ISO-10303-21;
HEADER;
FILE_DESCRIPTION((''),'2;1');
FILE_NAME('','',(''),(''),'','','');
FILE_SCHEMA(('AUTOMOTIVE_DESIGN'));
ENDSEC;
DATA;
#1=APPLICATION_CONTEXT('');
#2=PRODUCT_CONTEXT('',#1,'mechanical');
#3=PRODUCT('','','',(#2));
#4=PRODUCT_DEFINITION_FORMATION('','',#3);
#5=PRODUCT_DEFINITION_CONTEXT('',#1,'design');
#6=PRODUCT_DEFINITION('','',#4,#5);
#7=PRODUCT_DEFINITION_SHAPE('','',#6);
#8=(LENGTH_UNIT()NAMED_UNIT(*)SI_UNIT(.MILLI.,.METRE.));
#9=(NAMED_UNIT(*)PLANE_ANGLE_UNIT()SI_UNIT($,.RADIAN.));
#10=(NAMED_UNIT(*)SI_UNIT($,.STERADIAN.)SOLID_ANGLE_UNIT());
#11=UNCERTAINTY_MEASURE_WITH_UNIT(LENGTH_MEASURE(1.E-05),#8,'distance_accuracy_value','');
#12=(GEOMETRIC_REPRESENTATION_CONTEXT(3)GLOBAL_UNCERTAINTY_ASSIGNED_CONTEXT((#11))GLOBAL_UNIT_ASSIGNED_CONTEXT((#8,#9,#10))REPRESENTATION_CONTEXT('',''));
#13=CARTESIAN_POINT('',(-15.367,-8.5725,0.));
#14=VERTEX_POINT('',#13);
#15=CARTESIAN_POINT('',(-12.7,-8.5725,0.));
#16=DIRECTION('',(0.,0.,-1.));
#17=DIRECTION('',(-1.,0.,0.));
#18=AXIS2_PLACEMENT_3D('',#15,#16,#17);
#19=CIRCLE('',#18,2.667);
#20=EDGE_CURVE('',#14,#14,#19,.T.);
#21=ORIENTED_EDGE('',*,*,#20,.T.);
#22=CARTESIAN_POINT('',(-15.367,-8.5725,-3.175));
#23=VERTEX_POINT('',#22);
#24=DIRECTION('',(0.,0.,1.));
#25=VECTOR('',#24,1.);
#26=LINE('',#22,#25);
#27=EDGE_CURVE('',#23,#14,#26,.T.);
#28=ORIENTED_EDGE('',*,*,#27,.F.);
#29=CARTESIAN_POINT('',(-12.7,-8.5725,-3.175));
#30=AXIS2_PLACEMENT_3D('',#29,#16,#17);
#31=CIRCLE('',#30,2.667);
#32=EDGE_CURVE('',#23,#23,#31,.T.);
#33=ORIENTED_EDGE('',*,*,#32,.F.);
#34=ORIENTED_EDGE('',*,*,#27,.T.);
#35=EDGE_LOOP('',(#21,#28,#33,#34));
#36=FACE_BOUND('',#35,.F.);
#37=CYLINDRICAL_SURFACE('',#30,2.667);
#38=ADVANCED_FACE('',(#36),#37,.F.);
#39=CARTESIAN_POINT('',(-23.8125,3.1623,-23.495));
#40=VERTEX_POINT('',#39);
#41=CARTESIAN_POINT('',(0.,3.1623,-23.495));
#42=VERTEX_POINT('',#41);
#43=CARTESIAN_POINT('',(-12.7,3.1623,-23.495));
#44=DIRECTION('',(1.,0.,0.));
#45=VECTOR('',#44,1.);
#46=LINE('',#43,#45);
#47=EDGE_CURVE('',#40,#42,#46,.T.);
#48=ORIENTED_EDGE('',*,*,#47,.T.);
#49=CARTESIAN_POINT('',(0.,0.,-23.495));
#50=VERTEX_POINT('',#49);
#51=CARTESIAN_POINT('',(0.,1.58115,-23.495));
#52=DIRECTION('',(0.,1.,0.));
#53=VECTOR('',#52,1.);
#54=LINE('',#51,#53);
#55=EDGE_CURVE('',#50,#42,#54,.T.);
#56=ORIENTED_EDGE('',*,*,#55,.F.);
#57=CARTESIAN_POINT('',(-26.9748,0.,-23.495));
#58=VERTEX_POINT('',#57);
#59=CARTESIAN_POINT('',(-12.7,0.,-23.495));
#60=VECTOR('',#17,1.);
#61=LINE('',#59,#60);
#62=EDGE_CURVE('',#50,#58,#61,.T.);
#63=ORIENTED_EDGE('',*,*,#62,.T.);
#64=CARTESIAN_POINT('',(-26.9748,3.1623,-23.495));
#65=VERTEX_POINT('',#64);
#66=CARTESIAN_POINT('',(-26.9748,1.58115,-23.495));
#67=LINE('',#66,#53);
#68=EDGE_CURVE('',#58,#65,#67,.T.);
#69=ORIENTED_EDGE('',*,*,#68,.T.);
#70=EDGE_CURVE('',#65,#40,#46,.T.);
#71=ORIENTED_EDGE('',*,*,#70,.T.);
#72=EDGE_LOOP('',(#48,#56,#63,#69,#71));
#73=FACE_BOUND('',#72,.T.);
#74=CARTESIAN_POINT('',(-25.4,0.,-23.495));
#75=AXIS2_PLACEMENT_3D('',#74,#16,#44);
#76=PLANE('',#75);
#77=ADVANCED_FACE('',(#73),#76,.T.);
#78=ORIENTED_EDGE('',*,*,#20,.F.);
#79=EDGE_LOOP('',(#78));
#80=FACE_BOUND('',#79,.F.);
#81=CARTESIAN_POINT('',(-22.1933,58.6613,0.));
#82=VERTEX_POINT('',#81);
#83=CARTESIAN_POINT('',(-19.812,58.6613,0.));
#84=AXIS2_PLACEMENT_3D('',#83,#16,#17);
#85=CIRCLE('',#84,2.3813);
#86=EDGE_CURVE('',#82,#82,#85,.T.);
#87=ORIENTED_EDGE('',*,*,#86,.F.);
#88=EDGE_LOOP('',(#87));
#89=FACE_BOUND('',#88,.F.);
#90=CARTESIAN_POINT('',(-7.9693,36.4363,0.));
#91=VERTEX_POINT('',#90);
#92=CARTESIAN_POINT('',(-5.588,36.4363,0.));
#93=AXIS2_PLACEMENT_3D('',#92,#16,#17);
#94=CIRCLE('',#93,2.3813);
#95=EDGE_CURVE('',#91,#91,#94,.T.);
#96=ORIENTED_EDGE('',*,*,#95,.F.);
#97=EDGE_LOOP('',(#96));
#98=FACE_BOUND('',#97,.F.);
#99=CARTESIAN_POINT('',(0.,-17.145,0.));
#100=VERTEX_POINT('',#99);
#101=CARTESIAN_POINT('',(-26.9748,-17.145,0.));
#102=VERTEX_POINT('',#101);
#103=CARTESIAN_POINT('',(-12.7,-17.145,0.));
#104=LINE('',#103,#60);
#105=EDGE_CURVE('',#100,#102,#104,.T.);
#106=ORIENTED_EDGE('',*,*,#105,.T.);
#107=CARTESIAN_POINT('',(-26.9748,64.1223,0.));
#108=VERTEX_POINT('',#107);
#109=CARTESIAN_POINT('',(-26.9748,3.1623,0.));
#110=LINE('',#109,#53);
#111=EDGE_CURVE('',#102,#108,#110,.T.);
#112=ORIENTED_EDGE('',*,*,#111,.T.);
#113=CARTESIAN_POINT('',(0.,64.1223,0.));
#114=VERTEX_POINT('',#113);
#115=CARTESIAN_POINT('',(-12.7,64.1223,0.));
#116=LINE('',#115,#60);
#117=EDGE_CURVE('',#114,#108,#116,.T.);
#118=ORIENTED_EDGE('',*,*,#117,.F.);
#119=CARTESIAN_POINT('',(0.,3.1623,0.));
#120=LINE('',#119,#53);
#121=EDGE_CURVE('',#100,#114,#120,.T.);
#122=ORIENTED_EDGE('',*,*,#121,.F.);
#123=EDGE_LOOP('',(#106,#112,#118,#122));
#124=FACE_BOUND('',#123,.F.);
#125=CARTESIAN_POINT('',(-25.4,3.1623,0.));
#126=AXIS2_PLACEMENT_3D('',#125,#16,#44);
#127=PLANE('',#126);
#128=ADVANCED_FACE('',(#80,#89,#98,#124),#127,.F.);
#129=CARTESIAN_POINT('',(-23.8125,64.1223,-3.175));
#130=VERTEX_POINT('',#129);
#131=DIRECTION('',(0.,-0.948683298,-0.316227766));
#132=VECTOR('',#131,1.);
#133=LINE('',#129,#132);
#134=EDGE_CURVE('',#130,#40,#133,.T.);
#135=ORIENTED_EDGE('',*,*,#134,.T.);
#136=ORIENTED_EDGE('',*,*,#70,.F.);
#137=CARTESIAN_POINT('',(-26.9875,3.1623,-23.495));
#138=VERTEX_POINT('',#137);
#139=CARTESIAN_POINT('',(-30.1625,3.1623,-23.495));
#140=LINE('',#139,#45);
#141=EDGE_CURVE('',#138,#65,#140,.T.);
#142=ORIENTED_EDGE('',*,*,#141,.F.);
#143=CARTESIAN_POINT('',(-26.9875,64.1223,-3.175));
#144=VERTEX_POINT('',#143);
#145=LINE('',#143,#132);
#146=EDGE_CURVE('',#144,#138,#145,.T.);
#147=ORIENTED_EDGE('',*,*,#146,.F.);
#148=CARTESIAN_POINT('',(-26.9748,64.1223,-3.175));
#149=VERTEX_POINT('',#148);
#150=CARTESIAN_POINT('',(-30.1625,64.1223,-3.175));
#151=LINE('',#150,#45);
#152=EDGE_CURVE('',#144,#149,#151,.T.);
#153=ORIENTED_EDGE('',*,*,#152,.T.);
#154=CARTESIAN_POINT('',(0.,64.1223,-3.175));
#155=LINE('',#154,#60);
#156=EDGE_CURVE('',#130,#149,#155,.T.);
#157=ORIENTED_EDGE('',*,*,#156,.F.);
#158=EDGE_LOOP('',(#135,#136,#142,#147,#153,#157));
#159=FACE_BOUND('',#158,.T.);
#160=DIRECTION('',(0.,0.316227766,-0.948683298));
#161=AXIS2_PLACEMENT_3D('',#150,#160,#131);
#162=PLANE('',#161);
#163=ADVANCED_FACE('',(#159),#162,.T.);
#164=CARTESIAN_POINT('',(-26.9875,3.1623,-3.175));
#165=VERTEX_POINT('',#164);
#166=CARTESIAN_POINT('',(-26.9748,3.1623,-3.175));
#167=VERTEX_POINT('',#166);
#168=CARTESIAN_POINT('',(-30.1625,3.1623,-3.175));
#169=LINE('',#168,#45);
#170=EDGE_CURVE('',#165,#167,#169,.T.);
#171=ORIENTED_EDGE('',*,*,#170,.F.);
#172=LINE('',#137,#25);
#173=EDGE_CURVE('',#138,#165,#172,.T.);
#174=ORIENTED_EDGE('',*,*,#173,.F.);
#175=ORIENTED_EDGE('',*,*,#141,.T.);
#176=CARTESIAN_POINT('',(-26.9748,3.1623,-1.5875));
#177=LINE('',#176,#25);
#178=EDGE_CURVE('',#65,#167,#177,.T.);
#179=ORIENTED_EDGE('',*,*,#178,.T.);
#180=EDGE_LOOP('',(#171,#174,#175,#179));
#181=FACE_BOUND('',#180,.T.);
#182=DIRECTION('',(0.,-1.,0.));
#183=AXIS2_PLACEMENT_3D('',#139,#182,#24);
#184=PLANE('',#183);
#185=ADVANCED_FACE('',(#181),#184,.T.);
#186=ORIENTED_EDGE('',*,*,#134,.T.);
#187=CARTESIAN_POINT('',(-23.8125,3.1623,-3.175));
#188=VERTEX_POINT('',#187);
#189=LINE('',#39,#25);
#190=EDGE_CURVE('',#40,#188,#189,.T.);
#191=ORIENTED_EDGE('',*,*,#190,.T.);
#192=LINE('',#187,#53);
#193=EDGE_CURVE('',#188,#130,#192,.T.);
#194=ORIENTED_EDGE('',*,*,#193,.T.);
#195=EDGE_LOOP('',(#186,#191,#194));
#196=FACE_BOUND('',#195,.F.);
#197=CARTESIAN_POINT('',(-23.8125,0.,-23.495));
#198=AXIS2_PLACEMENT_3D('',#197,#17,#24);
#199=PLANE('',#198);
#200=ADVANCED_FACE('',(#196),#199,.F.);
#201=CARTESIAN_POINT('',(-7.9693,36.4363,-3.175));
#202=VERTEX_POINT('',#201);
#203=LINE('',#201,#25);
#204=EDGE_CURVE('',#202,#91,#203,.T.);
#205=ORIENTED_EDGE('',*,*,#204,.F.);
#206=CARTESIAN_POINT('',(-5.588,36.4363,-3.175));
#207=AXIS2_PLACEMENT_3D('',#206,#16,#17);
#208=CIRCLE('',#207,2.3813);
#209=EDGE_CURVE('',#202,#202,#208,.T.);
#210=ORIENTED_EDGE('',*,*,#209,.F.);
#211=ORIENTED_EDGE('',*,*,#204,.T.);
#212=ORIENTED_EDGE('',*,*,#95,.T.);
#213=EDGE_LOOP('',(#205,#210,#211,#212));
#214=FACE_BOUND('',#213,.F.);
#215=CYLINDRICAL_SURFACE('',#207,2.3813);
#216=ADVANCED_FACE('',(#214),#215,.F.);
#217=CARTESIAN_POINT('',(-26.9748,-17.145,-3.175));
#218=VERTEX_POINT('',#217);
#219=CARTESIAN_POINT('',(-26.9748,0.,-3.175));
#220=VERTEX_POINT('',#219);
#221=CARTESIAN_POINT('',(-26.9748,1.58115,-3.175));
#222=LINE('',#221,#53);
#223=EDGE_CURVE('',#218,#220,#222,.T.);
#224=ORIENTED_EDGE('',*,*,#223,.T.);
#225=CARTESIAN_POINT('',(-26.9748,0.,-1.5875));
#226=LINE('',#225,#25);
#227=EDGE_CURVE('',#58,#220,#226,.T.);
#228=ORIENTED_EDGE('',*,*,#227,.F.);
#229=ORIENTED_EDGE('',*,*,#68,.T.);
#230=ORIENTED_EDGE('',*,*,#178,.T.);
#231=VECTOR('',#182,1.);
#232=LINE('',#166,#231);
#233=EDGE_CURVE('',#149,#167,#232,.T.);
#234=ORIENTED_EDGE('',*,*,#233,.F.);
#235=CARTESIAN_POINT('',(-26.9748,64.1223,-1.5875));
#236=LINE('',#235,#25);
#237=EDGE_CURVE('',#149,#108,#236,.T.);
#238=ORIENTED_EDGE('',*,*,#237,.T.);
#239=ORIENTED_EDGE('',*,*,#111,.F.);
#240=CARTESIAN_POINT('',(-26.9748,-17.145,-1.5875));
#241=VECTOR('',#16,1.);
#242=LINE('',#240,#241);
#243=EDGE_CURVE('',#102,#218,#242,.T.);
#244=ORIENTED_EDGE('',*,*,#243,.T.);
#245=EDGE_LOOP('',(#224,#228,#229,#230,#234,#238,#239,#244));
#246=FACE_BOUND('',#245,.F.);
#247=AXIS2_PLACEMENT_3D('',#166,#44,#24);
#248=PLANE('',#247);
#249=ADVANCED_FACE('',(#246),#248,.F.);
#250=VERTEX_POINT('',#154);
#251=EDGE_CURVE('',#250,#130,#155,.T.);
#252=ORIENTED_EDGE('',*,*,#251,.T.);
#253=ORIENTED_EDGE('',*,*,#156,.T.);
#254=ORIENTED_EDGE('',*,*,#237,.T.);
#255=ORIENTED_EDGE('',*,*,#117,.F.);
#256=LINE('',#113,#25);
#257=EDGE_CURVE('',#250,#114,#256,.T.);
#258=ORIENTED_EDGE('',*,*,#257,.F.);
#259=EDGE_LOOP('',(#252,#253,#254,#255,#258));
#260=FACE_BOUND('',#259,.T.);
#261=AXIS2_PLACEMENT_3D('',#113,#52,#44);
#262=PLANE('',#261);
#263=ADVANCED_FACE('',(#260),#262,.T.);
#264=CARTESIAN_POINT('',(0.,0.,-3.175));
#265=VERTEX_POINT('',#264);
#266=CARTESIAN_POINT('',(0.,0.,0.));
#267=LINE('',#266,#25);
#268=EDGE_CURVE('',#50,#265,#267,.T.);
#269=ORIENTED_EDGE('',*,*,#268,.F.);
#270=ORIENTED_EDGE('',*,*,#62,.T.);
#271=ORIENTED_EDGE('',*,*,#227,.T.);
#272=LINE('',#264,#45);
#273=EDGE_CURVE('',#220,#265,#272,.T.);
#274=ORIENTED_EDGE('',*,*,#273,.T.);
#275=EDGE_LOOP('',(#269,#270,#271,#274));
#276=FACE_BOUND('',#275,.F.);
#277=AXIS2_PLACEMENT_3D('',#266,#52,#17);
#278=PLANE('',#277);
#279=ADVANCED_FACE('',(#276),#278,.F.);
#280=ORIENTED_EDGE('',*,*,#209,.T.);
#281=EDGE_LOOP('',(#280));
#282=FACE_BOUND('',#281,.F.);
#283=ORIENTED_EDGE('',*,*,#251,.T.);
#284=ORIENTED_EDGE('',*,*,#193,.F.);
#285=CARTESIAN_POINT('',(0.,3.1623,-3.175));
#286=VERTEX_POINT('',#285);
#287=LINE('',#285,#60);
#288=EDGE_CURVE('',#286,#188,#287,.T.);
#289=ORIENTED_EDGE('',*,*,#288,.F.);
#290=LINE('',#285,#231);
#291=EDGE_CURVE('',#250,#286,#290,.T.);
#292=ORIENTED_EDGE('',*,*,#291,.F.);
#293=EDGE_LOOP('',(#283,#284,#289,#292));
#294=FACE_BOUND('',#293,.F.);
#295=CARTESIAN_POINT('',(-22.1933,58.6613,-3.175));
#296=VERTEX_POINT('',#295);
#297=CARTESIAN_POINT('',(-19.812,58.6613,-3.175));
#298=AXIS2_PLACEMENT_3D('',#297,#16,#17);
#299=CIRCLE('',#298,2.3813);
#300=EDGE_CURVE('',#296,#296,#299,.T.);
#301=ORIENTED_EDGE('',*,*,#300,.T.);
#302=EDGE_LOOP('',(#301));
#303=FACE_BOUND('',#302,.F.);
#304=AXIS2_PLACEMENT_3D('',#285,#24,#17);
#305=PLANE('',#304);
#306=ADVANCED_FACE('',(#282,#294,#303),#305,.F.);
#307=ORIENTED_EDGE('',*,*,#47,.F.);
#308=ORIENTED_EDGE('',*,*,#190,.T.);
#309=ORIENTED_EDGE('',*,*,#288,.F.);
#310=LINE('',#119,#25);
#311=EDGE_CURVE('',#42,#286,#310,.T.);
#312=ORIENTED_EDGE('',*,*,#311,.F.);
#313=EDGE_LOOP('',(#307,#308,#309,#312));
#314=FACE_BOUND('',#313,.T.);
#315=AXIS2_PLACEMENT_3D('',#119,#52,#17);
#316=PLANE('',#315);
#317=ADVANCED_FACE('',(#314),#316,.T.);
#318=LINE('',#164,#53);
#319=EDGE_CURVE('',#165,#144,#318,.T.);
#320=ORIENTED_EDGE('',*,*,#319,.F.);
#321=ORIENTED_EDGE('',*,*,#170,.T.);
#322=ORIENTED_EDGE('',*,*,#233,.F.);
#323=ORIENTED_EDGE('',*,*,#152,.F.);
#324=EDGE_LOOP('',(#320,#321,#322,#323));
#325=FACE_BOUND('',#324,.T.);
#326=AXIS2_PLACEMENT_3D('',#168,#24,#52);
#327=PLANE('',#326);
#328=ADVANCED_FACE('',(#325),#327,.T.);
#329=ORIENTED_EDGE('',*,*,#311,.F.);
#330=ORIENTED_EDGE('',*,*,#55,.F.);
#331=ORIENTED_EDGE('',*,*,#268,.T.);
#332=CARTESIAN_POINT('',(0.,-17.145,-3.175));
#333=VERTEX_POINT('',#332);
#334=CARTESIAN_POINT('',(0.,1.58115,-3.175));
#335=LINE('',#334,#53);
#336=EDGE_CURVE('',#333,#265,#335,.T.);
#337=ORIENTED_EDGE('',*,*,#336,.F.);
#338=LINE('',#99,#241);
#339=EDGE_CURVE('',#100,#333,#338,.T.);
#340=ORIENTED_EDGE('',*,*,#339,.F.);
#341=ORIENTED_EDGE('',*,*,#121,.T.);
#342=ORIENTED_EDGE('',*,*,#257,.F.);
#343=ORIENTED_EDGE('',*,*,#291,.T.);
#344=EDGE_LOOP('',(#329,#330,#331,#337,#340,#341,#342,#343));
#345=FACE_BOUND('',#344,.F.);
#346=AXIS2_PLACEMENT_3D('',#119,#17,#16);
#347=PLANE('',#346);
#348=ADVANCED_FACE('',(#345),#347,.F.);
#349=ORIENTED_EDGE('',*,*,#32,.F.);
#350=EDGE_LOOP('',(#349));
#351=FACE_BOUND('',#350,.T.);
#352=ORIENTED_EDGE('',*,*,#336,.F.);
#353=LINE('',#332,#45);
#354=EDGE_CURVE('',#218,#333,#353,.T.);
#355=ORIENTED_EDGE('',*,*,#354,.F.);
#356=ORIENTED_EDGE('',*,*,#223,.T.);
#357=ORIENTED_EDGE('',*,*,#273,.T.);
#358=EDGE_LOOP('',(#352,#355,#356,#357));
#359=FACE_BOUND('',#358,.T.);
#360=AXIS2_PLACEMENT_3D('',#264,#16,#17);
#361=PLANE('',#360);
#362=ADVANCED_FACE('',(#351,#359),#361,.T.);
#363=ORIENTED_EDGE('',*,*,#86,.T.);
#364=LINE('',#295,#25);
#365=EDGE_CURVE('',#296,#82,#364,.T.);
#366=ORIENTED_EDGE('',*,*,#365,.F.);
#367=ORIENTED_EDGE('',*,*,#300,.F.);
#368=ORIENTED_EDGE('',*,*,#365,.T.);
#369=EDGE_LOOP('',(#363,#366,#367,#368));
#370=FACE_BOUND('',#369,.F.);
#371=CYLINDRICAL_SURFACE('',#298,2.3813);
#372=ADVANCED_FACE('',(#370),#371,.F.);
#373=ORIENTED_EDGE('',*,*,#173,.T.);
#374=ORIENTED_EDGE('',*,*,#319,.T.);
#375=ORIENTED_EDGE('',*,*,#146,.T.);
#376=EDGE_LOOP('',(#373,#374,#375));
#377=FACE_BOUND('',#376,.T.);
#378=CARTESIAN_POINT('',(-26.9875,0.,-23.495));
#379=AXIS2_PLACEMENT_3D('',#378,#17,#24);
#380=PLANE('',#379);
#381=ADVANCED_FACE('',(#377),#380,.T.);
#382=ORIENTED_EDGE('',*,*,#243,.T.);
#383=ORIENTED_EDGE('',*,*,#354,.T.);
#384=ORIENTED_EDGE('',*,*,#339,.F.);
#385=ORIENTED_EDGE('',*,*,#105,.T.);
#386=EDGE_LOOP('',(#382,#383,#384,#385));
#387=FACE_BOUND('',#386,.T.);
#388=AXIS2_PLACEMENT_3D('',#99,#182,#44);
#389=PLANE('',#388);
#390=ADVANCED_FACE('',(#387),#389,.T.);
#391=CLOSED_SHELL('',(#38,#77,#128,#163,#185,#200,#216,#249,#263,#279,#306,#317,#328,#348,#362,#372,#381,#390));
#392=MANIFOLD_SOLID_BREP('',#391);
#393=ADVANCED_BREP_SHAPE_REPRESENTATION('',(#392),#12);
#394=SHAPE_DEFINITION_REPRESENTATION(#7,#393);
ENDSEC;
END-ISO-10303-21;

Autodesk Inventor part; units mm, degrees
ref_plane "YZ Plane" through (0, 0, 0) normal (1, 0, 0) x (0, 1, 0)
ref_plane "XZ Plane" through (0, 0, 0) normal (0, 1, 0) x (-1, 0, 0)
ref_plane "XY Plane" through (0, 0, 0) normal (0, 0, 1) x (1, 0, 0)
sketch "Sketch1" plane through (0, 0, 0) normal (0, 1, 0) x (-1, 0, 0)
  line L0 (0, 0) -> (25.4, 0)
  line L1 (25.4, 0) -> (25.4, -20.32)
  line L2 (25.4, -20.32) -> (0, -20.32)
  line L3 (0, -20.32) -> (0, 0)
  dimension "d0" = 25.4
  dimension "d1" = 20.32
extrude "Extrusion1" add sketch "Sketch1" along normal blind 3.1623
sketch "Sketch2" plane through (0, 0, 0) normal (0, -1, 0) x (1, 0, 0)
  line L0 (-25.4, 0) -> (0, 0) projected
  line L1 (0, 0) -> (0, -20.32) projected
  line L2 (-25.4, 0) -> (0, 0)
  line L3 (0, 0) -> (0, -3.175)
  line L4 (0, -3.175) -> (-25.4, -3.175)
  line L5 (-25.4, -3.175) -> (-25.4, 0)
  dimension "d4" = 3.175
extrude "Extrusion2" add sketch "Sketch2" along normal blind 17.145
sketch "Sketch3" plane through (0, 3.1623, 0) normal (0, 1, 0) x (1, 0, 0)
  line L0 (-25.4, 0) -> (0, 0) projected
  line L1 (0, 0) -> (0, 20.32) projected
  line L2 (-25.4, 0) -> (0, 0)
  line L3 (0, 0) -> (0, 3.175)
  line L4 (0, 3.175) -> (-25.4, 3.175)
  line L5 (-25.4, 3.175) -> (-25.4, 0)
  dimension "d7" = 3.175
extrude "Extrusion3" add sketch "Sketch3" along normal blind 60.96
sketch "Sketch4" plane through (0, 3.1623, -3.175) normal (0, 0, -1) x (-1, 0, 0)
  line L0 (0, 60.96) -> (25.4, 60.96) projected
  line L1 (25.4, 60.96) -> (19.812, 60.96)
  line L2 (0, 60.96) -> (9.271, 60.96)
  line L3 (0, 0) -> (25.4, 0) projected
  line L4 (12.7, 0) -> (12.7, 60.96)
  line L5 (12.7, 0) -> (22.733, 0) construction
  line L6 (12.7, 0) -> (2.667, 0) construction
  line L7 (2.667, 0) -> (2.667, 60.96) construction
  line L8 (22.733, 0) -> (22.733, 60.96) construction
  line L9 (25.4, 60.96) -> (0, 60.96) construction
  line L10 (2.667, 60.96) -> (2.667, 21.59) construction
  line L11 (2.667, 21.59) -> (22.733, 21.59) construction
  line L12 (2.667, 60.96) -> (5.588, 60.96) construction
  line L13 (5.588, 60.96) -> (5.588, 21.59) construction
  line L14 (22.733, 60.96) -> (19.812, 60.96) construction
  line L15 (19.812, 60.96) -> (19.812, 21.59) construction
  line L16 (22.733, 60.96) -> (22.733, 55.499) construction
  line L17 (22.733, 55.499) -> (19.812, 55.499) construction
  line L18 (2.667, 21.59) -> (2.667, 33.274) construction
  line L19 (2.667, 33.274) -> (5.588, 33.274) construction
  circle A0 centre (19.812, 55.499) radius 2.3813
  circle A1 centre (5.588, 33.274) radius 2.3813
  point P0 (0, -3.1623)
  dimension "d76" = 10.033
  dimension "d77" = 10.033
  dimension "d78" = 39.37
  dimension "d79" = 2.921
  dimension "d80" = 2.921
  dimension "d81" = 5.461
  dimension "d82" = 11.684
  dimension "d83" = 4.7625
  dimension "d84" = 4.7625
extrude "Extrusion4" cut sketch "Sketch4" against normal blind 63.5
sketch "Sketch7" plane through (0, 0, -3.175) normal (0, 0, -1) x (-1, 0, 0)
  line L0 (25.4, -17.145) -> (0, -17.145) projected
  line L1 (12.7, -17.145) -> (12.7, -8.5725)
  circle A0 centre (12.7, -8.5725) radius 2.667
  point P0 (0, 0)
  dimension "d23" = 5.334
extrude "Extrusion7" cut sketch "Sketch7" against normal blind 46.0375
move faces "Move1" translate (0, 0, -3.175) faces at (-8.4667, 1.0541, -20.32)
move faces "Move11" translate (-4.7625, 0, 0) faces at (-25.4, 16.7132, -1.0583)
move faces "Move13" translate (1.5875, 0, 0) faces at (-30.1625, 16.7132, -1.0583)
move faces "Move14" translate (1.6002, 0, 0) faces at (-28.575, 16.7132, -1.0583)
sketch "Sketch16" plane through (-30.1625, 0, -23.495) normal (-1, 0, 0) x (0, 0, 1)
  line L0 (0, 3.1623) -> (20.32, 3.1623) projected
  line L1 (20.32, 3.1623) -> (20.32, 64.1223) projected
  line L2 (0, 3.1623) -> (20.32, 3.1623)
  line L3 (20.32, 3.1623) -> (20.32, 64.1223)
  line L4 (20.32, 64.1223) -> (0, 3.1623)
  point P0 (23.495, 0)
extrude "Extrusion18" add sketch "Sketch16" against normal blind 6.35
extrude "Extrusion19" cut sketch "Sketch16" against normal blind 3.175
properties part number "SolenoidMount"
